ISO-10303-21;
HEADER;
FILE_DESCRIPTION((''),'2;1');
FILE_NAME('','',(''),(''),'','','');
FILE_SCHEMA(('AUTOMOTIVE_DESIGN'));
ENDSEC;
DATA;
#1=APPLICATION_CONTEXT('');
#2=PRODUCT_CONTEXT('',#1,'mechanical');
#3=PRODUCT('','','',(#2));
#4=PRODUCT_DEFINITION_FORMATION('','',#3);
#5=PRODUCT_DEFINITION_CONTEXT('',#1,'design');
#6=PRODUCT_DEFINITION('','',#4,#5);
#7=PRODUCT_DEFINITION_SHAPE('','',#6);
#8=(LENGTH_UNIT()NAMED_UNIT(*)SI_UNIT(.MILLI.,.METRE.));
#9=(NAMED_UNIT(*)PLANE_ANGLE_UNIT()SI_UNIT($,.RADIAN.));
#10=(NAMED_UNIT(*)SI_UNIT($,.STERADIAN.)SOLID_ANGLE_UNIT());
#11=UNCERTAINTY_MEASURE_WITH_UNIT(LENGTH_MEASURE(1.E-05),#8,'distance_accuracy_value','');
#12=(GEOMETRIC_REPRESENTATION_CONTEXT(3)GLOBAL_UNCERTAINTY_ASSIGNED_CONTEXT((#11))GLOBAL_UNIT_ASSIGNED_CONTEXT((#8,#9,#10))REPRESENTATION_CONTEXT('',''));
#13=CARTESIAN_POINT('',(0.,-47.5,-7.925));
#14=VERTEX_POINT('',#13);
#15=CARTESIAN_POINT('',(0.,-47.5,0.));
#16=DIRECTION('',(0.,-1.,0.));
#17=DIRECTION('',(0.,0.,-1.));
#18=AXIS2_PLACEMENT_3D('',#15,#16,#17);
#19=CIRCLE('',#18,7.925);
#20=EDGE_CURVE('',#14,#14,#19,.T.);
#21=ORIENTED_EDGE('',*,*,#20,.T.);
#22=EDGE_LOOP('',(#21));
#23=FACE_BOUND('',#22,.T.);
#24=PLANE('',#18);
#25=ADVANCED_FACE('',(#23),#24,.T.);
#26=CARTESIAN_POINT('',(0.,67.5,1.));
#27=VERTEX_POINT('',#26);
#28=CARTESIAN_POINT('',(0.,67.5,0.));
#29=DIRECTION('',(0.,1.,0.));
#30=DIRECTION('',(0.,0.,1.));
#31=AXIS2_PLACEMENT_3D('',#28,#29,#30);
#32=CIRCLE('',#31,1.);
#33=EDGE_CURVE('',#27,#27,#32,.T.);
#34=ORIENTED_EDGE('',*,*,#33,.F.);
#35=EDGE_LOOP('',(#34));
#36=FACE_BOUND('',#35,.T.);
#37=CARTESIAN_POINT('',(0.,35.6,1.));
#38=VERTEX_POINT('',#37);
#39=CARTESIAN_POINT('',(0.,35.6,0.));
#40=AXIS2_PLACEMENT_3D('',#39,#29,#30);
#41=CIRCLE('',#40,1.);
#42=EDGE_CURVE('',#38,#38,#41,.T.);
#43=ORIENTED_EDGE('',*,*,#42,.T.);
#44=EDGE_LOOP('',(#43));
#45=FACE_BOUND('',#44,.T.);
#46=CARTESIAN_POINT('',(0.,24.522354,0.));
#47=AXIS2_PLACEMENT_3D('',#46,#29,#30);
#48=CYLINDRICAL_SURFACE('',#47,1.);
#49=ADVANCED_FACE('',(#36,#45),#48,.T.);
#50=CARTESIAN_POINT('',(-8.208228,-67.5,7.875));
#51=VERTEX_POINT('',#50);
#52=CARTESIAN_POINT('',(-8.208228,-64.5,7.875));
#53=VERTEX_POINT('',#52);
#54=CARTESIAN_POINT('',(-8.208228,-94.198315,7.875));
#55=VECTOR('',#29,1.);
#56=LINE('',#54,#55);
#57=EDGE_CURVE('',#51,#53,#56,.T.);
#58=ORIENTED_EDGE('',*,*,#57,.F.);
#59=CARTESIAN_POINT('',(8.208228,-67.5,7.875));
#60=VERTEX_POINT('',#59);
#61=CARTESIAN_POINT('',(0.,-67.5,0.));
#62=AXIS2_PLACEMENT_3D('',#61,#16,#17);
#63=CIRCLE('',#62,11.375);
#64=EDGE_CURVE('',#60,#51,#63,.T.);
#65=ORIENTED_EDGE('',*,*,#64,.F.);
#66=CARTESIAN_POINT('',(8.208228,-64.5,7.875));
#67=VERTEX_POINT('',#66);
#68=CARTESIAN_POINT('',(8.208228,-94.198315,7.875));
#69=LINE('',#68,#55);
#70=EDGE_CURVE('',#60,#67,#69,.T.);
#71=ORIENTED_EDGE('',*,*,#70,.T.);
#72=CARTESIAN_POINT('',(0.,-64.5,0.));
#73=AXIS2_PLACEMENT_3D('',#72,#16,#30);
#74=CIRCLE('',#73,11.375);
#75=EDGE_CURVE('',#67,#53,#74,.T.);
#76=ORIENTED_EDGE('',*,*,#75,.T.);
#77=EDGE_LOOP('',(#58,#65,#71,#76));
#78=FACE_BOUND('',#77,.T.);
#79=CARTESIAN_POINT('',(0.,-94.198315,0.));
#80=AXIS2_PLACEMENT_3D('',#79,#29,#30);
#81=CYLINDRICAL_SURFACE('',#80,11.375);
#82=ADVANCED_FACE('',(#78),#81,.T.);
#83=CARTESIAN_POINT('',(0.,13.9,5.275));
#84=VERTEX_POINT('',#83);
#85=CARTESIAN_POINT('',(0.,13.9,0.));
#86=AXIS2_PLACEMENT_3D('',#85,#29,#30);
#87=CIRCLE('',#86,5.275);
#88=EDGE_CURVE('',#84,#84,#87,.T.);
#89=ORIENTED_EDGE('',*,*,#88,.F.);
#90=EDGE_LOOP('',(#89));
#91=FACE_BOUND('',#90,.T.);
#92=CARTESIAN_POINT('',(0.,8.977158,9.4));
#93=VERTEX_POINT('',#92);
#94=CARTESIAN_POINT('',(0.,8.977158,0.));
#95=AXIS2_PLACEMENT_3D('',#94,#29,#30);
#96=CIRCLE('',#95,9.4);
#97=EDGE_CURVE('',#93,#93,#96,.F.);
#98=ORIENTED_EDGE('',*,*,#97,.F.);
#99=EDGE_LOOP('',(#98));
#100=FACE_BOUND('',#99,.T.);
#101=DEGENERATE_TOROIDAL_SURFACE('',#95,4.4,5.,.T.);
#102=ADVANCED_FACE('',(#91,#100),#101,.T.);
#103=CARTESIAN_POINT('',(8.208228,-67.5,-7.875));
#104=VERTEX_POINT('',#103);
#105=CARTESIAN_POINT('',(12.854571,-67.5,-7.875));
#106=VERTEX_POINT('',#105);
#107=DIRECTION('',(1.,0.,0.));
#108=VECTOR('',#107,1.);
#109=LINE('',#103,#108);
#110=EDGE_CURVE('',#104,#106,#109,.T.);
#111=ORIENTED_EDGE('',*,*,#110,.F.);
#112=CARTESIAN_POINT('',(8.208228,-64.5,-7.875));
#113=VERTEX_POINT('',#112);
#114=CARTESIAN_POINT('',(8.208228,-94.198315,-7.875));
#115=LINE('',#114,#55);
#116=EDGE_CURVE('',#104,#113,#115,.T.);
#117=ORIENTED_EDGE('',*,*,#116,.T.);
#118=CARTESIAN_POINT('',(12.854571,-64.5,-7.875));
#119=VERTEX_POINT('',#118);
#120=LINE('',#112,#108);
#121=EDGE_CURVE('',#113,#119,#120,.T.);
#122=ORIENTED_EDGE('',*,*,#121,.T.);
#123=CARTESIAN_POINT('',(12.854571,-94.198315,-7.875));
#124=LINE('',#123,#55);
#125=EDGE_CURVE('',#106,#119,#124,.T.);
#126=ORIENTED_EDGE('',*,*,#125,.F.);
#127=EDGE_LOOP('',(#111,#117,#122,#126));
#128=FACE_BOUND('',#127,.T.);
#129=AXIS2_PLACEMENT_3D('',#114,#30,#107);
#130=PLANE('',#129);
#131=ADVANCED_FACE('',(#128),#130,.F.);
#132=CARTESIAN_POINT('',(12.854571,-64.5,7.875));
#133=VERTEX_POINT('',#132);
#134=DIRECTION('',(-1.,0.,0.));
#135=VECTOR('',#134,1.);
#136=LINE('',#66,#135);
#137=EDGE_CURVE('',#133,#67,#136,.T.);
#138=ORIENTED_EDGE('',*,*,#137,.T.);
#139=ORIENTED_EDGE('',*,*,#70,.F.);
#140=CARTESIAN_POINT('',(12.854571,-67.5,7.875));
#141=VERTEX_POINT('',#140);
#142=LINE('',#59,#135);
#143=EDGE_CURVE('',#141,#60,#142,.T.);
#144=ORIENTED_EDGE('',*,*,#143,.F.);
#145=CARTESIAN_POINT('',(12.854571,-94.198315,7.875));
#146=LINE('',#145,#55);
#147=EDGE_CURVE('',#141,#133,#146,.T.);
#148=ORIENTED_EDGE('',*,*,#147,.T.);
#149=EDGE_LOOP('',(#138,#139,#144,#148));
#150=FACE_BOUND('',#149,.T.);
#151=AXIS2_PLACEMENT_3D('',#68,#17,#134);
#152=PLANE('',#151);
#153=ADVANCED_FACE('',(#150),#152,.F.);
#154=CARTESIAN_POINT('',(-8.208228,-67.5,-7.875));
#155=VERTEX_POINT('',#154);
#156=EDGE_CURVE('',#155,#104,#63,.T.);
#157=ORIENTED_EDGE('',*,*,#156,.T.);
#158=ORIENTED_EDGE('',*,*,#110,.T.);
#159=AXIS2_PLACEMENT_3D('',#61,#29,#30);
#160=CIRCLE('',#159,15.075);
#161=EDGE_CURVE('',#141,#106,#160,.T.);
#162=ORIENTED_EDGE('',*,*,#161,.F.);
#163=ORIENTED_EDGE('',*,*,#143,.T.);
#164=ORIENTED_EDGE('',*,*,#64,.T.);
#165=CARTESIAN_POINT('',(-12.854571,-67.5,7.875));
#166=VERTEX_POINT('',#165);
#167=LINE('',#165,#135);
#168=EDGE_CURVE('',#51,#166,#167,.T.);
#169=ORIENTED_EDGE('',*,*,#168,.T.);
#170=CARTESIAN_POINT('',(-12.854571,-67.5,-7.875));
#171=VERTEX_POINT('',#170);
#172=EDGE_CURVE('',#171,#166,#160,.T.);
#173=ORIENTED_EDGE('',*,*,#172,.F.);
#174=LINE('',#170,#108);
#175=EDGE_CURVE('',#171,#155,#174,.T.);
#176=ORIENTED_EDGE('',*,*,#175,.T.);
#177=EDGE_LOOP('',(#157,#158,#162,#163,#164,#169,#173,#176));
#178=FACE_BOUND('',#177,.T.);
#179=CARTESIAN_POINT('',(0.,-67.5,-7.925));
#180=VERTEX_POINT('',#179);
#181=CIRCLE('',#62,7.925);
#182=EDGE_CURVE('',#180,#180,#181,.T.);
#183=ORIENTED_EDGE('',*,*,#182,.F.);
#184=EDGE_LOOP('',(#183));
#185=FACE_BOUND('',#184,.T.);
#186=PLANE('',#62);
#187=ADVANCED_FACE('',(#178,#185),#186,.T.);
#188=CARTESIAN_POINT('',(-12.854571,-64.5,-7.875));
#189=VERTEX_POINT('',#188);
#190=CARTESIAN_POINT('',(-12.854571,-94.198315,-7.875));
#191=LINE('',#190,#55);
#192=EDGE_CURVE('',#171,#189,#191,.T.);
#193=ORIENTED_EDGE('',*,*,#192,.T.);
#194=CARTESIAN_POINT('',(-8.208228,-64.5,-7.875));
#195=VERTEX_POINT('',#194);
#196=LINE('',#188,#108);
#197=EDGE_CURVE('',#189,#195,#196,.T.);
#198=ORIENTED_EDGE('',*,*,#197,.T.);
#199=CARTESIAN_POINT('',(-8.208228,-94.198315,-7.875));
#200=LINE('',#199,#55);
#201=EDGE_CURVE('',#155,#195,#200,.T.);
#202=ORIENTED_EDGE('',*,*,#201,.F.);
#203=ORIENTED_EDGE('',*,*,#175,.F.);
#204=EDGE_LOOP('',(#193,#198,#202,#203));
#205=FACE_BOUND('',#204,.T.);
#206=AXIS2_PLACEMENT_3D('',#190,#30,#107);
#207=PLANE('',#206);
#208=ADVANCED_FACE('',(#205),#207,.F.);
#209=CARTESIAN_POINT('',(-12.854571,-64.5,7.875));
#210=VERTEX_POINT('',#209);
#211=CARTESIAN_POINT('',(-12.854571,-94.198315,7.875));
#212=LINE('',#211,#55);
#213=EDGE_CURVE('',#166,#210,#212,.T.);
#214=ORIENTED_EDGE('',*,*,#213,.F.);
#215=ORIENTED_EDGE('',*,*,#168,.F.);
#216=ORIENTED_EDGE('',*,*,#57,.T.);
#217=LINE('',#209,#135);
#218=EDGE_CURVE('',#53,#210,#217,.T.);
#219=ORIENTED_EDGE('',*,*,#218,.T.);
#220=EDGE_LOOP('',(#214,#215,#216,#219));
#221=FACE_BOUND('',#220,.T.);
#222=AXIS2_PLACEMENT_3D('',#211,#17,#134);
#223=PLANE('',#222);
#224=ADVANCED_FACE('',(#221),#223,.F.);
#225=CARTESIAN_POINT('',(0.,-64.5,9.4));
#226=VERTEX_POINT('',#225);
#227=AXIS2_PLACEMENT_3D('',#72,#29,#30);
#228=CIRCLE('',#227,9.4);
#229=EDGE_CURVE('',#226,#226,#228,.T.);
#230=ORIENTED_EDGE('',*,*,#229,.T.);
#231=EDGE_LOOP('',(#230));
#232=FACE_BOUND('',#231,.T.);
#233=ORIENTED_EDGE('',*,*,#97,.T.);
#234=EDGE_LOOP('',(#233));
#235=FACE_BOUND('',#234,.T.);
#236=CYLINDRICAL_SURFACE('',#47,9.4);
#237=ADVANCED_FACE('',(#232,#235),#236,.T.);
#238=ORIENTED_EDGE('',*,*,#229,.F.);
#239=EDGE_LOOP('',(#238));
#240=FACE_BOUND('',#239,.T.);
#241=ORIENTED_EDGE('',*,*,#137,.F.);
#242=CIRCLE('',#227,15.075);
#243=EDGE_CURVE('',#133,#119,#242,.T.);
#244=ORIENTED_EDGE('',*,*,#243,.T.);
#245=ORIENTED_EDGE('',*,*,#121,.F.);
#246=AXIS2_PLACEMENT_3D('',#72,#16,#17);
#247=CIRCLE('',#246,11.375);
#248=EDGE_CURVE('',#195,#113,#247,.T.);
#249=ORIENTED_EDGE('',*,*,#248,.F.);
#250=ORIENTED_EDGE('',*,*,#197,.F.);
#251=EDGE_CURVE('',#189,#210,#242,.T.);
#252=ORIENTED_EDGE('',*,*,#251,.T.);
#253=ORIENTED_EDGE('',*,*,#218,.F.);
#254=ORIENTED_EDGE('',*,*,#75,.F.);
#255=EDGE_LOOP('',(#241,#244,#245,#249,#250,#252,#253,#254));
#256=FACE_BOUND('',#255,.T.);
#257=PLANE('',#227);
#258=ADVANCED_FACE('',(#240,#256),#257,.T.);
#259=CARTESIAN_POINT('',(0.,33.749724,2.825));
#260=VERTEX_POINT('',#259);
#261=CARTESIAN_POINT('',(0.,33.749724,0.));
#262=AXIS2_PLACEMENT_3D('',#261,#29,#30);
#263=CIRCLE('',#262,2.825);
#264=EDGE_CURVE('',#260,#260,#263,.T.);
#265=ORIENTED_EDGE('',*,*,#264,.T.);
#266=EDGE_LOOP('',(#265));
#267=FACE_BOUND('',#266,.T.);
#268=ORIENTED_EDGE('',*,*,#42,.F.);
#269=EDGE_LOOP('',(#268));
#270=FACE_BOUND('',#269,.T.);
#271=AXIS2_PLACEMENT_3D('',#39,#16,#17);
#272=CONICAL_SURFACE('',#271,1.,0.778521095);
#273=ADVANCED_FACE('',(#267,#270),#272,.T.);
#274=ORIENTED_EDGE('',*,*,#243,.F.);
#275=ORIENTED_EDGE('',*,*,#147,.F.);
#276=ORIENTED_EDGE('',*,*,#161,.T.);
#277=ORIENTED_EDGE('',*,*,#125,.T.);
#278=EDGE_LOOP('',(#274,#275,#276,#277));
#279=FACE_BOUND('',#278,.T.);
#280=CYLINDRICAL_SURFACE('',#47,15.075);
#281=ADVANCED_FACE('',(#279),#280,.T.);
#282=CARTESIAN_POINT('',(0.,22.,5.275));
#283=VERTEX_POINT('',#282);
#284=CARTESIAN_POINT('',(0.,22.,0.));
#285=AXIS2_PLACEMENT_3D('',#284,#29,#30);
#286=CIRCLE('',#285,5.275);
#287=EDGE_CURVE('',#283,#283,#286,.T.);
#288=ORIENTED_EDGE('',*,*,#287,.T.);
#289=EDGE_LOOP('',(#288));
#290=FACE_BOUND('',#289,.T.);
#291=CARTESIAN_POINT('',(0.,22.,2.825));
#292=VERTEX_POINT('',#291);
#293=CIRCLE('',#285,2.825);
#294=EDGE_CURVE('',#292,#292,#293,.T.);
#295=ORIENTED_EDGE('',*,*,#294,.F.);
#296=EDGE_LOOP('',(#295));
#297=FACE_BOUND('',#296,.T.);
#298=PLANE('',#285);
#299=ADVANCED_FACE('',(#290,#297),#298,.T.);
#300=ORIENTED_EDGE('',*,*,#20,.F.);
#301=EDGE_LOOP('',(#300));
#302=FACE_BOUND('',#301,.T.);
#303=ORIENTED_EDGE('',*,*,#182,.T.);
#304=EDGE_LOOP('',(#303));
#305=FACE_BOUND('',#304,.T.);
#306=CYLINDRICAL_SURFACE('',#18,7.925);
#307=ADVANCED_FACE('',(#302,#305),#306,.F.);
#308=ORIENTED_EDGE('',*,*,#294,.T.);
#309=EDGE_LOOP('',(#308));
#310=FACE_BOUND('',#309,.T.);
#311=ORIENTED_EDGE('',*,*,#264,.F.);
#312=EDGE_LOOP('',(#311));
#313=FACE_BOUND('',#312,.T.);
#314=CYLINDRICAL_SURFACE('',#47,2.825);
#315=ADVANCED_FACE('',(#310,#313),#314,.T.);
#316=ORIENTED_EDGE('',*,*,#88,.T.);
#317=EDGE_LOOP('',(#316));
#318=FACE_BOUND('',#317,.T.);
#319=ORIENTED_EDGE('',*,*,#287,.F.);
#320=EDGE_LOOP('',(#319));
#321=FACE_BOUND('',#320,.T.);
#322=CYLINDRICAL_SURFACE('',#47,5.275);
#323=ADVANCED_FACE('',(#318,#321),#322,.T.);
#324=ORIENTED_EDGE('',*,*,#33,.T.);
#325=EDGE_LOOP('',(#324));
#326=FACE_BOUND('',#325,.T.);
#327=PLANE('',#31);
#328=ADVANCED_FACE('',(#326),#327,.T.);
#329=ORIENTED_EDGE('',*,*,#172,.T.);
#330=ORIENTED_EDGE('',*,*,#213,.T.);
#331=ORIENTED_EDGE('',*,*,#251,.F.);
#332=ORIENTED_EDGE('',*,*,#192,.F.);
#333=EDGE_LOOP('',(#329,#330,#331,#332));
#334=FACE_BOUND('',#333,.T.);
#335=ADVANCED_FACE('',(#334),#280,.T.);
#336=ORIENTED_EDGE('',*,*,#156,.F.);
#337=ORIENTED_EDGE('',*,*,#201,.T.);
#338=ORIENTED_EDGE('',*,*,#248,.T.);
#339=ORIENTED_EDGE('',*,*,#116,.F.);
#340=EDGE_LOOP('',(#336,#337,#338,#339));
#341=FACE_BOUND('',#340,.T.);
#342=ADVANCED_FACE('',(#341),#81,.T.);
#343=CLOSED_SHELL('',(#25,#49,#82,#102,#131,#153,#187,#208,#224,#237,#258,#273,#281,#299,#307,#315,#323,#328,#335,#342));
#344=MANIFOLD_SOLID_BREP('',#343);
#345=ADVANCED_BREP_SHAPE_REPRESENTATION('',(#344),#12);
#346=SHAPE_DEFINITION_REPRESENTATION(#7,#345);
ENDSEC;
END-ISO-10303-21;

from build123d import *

# Parameters (mm, degrees)
FILLET1_R          = 5
CUT_EXTRUDE1_START = -3
CUT_EXTRUDE1_DEPTH = 3
SKETCH4_R          = 7.925
CUT_EXTRUDE2_DEPTH = 20


with BuildPart() as part:
    # Sketch2 → Revolve1 (revolve)
    with BuildSketch(Plane.XY, mode=Mode.PRIVATE) as revolve1_sk:
        Polygon((15.075, -67.5), (0, -67.5), (0, 67.5), (1, 67.5), (1, 35.6), (2.825, 33.749724479), (2.825, 22), (5.275, 22), (5.275, 13.9), (9.4, 13.9), (9.4, -64.5), (15.075, -64.5), align=None)
    revolve(revolve1_sk.sketch.rotate(Axis((0, 24.52235385, 0), (0, -1, 0)), 90), axis=Axis((0, 24.52235385, 0), (0, -1, 0)))

    # Fillet1
    # the kernel refuses this fillet: 5 mm, written as the material it takes off along each edge
    with BuildSketch(Plane(origin=(0, 13.9, 0), x_dir=(0, 0, 1), z_dir=(1, 0, 0))) as fillet1_piece_1:
        with BuildLine():
            CenterArc((4.4, 4.922842167), FILLET1_R, 280.078658108, 79.921341892)
            Line((9.4, 4.922842167), (9.5, 4.922842167))
            Line((9.5, 4.922842167), (9.5, 0))
            Line((9.5, 0), (9.4, -0.1))
            ThreePointArc((9.4, -0.1), (7.3375, -0.1), (5.2925, -0.098456843))
            Line((5.2925, -0.098456843), (5.275, 0))
        make_face()
    revolve(axis=Axis((0, 13.9, 0), (0, -1, 0)), mode=Mode.SUBTRACT)

    # Sketch3 → Cut-Extrude1 (cut)
    with BuildSketch(Plane(origin=(0, -64.5, 0), x_dir=(1, 0, 0), z_dir=(0, 1, 0)).offset(CUT_EXTRUDE1_START)):
        with BuildLine():
            Line((-12.854571171, 7.875), (-8.20822758, 7.875))
            ThreePointArc((-8.20822758, 7.875), (0, 11.375), (8.20822758, 7.875))
            Line((8.20822758, 7.875), (12.854571171, 7.875))
            ThreePointArc((12.854571171, 7.875), (0, 15.075), (-12.854571171, 7.875))
        make_face()
        with BuildLine():
            Line((-12.854571171, -7.875), (-8.20822758, -7.875))
            ThreePointArc((-8.20822758, -7.875), (0, -11.375), (8.20822758, -7.875))
            Line((8.20822758, -7.875), (12.854571171, -7.875))
            ThreePointArc((12.854571171, -7.875), (0, -15.075), (-12.854571171, -7.875))
        make_face()
    extrude(amount=CUT_EXTRUDE1_DEPTH, mode=Mode.SUBTRACT)

    # Sketch4 → Cut-Extrude2 (cut)
    with BuildSketch(Plane.XZ.offset(67.5)):
        with Locations(Location((0, 0, 0), (0, 0, 270))):
            Circle(SKETCH4_R)
    extrude(amount=-CUT_EXTRUDE2_DEPTH, mode=Mode.SUBTRACT)


solid = part.part
